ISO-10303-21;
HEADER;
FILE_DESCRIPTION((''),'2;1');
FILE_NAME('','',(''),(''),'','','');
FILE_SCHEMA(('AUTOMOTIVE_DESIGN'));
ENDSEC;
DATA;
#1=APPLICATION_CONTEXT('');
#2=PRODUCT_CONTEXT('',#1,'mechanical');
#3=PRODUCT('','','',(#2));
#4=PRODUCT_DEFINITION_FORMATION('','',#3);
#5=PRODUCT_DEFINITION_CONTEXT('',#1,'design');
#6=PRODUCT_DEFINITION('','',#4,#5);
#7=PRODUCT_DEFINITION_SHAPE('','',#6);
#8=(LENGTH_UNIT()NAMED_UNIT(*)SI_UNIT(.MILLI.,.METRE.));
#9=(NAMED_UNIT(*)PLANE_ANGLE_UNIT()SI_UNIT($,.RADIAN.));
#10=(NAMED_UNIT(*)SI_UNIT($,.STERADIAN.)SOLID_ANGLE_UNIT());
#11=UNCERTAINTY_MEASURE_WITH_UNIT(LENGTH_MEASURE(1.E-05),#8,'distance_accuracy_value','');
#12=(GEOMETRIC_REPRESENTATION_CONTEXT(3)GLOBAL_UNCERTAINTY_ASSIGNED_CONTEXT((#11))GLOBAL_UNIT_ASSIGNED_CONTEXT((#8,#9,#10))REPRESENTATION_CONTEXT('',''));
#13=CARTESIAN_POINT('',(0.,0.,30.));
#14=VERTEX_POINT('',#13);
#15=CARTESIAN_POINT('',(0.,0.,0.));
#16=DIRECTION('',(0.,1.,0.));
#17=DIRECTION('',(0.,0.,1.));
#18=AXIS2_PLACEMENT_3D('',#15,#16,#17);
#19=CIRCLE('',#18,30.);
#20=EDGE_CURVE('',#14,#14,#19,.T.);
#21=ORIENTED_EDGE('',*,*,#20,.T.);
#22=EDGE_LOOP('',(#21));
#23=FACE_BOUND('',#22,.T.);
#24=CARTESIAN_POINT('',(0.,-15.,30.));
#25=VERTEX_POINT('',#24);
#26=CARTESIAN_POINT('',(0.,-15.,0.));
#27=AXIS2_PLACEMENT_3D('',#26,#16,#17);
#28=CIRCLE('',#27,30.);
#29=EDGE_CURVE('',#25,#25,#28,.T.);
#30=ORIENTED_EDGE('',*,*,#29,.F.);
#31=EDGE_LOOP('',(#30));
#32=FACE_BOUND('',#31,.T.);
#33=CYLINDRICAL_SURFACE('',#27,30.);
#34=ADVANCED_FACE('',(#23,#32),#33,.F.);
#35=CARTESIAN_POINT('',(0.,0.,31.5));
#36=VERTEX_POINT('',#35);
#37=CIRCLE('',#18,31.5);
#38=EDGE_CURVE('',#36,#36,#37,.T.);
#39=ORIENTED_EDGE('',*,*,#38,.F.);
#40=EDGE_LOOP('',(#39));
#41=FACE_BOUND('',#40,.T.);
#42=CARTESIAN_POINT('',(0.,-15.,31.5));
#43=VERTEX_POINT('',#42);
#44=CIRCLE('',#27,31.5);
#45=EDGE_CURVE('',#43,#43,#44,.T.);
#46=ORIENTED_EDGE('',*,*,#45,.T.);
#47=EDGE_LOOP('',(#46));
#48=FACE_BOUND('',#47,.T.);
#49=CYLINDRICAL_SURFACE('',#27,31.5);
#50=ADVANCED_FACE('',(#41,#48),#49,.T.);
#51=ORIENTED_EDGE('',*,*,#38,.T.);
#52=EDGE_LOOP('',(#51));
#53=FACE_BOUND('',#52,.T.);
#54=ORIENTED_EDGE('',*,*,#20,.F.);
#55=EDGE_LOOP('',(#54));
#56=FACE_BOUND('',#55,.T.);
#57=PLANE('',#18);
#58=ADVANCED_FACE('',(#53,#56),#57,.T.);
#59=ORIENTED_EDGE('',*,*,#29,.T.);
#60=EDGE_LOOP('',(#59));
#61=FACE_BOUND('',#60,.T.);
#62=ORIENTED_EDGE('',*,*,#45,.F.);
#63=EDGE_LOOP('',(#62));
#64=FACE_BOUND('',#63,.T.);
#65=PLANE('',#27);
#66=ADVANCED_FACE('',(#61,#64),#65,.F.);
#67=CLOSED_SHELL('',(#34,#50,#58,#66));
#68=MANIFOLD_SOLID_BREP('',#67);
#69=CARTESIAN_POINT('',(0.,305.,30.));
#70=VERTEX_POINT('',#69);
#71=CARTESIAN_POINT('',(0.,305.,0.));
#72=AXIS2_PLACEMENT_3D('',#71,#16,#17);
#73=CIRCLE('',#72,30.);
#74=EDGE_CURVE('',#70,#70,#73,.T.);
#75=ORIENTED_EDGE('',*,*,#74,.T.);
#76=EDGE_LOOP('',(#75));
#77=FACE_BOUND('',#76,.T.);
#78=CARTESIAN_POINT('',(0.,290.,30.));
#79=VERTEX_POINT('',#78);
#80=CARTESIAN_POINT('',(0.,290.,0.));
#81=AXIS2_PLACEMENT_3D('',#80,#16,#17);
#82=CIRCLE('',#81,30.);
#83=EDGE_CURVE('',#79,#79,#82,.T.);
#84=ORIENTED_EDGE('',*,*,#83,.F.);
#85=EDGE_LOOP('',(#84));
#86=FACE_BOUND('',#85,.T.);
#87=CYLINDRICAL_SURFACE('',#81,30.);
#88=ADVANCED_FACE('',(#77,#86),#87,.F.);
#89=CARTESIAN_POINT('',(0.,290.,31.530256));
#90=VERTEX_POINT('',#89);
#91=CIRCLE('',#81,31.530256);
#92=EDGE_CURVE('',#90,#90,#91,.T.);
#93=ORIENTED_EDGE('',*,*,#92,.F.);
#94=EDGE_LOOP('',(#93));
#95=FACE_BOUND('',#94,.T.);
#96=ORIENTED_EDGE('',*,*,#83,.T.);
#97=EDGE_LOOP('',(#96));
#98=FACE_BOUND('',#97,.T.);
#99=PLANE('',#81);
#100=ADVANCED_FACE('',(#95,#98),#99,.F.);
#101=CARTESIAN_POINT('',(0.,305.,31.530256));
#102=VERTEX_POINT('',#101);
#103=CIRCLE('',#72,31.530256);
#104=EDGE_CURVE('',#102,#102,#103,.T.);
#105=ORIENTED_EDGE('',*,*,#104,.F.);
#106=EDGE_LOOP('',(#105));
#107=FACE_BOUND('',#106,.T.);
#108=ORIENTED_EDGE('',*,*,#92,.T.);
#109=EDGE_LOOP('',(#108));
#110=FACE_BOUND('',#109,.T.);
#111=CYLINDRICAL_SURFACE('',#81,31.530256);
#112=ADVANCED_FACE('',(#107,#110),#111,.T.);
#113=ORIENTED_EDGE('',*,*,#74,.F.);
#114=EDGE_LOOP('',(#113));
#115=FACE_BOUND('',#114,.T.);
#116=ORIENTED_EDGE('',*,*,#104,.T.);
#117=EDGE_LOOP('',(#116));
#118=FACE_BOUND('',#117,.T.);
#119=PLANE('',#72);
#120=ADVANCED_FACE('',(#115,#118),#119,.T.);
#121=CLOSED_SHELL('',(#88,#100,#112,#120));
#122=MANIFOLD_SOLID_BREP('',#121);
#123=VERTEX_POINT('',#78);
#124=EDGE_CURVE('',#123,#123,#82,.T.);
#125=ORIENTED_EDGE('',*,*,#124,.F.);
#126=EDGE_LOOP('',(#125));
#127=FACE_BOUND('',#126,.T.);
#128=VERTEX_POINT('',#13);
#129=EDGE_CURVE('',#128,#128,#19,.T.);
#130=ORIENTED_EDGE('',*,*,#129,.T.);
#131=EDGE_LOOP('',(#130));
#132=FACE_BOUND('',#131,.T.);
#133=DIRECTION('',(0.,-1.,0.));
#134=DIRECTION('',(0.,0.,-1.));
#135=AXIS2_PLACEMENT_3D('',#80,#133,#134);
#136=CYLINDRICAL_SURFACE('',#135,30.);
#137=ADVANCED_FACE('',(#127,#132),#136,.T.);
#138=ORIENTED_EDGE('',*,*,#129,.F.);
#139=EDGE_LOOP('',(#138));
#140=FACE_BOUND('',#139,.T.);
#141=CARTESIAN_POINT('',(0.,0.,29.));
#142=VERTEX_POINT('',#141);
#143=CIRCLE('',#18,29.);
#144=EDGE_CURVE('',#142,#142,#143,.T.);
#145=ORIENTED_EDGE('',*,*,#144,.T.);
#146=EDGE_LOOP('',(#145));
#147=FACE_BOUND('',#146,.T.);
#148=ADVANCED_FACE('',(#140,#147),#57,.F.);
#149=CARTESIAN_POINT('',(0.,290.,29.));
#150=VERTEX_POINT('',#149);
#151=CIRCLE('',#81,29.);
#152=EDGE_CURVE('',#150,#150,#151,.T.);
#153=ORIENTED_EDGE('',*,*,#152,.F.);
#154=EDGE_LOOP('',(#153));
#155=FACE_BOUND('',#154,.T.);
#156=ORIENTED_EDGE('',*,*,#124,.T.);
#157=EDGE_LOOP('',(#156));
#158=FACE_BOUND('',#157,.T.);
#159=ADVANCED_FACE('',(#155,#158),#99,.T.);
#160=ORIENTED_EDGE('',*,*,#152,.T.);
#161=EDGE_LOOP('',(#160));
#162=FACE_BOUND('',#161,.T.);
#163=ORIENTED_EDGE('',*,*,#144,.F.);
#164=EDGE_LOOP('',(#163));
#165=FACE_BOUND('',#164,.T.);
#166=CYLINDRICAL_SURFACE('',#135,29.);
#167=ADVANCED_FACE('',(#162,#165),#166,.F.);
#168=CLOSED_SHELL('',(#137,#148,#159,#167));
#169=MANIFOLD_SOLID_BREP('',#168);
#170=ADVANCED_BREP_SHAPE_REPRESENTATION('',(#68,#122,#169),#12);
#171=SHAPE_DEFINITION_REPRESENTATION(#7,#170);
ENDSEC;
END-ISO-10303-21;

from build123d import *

# Parameters (mm, degrees)
SKETCH1_R                 = 30
SKETCH1_R_2               = 29
BOSS_EXTRUDE2_DEPTH       = 290
SKETCH2_R                 = 31.5
SKETCH2_R_2               = 30
BOSS_EXTRUDE3_DEPTH       = 15
BOSS_EXTRUDE4_START       = 290
BOSS_EXTRUDE4_OUTLINE_R   = 31.530256187
BOSS_EXTRUDE4_OUTLINE_R_2 = 30
BOSS_EXTRUDE4_DEPTH       = 15


# Read off the part's stored shape, not the designer's step: Boss-Extrude4
with BuildPart() as part:
    # Sketch1 → Boss-Extrude2 (new body)
    with BuildSketch(Plane(origin=(0, 0, 0), x_dir=(1, 0, 0), z_dir=(0, 1, 0))):
        with Locations(Location((0, 0, 0), (0, 0, 270))):
            Circle(SKETCH1_R)
        with Locations(Location((0, 0, 0), (0, 0, 270))):
            Circle(SKETCH1_R_2, mode=Mode.SUBTRACT)
    extrude(amount=BOSS_EXTRUDE2_DEPTH)


with BuildPart() as body_2:
    # Sketch2 → Boss-Extrude3 (new body)
    with BuildSketch(Plane(origin=(0, 0, 0), x_dir=(1, 0, 0), z_dir=(0, 1, 0))):
        with Locations(Location((0, 0, 0), (0, 0, 270))):
            Circle(SKETCH2_R)
        with Locations(Location((0, 0, 0), (0, 0, 270))):
            Circle(SKETCH2_R_2, mode=Mode.SUBTRACT)
    extrude(amount=-BOSS_EXTRUDE3_DEPTH)


with BuildPart() as body_3:
    # Boss-Extrude4 outline → Boss-Extrude4 (new body)
    with BuildSketch(Plane(origin=(0, 0, 0), x_dir=(1, 0, 0), z_dir=(0, 1, 0)).offset(BOSS_EXTRUDE4_START)):
        Circle(BOSS_EXTRUDE4_OUTLINE_R)
        Circle(BOSS_EXTRUDE4_OUTLINE_R_2, mode=Mode.SUBTRACT)
    extrude(amount=BOSS_EXTRUDE4_DEPTH)


solid = Compound([part.part, body_2.part, body_3.part])
